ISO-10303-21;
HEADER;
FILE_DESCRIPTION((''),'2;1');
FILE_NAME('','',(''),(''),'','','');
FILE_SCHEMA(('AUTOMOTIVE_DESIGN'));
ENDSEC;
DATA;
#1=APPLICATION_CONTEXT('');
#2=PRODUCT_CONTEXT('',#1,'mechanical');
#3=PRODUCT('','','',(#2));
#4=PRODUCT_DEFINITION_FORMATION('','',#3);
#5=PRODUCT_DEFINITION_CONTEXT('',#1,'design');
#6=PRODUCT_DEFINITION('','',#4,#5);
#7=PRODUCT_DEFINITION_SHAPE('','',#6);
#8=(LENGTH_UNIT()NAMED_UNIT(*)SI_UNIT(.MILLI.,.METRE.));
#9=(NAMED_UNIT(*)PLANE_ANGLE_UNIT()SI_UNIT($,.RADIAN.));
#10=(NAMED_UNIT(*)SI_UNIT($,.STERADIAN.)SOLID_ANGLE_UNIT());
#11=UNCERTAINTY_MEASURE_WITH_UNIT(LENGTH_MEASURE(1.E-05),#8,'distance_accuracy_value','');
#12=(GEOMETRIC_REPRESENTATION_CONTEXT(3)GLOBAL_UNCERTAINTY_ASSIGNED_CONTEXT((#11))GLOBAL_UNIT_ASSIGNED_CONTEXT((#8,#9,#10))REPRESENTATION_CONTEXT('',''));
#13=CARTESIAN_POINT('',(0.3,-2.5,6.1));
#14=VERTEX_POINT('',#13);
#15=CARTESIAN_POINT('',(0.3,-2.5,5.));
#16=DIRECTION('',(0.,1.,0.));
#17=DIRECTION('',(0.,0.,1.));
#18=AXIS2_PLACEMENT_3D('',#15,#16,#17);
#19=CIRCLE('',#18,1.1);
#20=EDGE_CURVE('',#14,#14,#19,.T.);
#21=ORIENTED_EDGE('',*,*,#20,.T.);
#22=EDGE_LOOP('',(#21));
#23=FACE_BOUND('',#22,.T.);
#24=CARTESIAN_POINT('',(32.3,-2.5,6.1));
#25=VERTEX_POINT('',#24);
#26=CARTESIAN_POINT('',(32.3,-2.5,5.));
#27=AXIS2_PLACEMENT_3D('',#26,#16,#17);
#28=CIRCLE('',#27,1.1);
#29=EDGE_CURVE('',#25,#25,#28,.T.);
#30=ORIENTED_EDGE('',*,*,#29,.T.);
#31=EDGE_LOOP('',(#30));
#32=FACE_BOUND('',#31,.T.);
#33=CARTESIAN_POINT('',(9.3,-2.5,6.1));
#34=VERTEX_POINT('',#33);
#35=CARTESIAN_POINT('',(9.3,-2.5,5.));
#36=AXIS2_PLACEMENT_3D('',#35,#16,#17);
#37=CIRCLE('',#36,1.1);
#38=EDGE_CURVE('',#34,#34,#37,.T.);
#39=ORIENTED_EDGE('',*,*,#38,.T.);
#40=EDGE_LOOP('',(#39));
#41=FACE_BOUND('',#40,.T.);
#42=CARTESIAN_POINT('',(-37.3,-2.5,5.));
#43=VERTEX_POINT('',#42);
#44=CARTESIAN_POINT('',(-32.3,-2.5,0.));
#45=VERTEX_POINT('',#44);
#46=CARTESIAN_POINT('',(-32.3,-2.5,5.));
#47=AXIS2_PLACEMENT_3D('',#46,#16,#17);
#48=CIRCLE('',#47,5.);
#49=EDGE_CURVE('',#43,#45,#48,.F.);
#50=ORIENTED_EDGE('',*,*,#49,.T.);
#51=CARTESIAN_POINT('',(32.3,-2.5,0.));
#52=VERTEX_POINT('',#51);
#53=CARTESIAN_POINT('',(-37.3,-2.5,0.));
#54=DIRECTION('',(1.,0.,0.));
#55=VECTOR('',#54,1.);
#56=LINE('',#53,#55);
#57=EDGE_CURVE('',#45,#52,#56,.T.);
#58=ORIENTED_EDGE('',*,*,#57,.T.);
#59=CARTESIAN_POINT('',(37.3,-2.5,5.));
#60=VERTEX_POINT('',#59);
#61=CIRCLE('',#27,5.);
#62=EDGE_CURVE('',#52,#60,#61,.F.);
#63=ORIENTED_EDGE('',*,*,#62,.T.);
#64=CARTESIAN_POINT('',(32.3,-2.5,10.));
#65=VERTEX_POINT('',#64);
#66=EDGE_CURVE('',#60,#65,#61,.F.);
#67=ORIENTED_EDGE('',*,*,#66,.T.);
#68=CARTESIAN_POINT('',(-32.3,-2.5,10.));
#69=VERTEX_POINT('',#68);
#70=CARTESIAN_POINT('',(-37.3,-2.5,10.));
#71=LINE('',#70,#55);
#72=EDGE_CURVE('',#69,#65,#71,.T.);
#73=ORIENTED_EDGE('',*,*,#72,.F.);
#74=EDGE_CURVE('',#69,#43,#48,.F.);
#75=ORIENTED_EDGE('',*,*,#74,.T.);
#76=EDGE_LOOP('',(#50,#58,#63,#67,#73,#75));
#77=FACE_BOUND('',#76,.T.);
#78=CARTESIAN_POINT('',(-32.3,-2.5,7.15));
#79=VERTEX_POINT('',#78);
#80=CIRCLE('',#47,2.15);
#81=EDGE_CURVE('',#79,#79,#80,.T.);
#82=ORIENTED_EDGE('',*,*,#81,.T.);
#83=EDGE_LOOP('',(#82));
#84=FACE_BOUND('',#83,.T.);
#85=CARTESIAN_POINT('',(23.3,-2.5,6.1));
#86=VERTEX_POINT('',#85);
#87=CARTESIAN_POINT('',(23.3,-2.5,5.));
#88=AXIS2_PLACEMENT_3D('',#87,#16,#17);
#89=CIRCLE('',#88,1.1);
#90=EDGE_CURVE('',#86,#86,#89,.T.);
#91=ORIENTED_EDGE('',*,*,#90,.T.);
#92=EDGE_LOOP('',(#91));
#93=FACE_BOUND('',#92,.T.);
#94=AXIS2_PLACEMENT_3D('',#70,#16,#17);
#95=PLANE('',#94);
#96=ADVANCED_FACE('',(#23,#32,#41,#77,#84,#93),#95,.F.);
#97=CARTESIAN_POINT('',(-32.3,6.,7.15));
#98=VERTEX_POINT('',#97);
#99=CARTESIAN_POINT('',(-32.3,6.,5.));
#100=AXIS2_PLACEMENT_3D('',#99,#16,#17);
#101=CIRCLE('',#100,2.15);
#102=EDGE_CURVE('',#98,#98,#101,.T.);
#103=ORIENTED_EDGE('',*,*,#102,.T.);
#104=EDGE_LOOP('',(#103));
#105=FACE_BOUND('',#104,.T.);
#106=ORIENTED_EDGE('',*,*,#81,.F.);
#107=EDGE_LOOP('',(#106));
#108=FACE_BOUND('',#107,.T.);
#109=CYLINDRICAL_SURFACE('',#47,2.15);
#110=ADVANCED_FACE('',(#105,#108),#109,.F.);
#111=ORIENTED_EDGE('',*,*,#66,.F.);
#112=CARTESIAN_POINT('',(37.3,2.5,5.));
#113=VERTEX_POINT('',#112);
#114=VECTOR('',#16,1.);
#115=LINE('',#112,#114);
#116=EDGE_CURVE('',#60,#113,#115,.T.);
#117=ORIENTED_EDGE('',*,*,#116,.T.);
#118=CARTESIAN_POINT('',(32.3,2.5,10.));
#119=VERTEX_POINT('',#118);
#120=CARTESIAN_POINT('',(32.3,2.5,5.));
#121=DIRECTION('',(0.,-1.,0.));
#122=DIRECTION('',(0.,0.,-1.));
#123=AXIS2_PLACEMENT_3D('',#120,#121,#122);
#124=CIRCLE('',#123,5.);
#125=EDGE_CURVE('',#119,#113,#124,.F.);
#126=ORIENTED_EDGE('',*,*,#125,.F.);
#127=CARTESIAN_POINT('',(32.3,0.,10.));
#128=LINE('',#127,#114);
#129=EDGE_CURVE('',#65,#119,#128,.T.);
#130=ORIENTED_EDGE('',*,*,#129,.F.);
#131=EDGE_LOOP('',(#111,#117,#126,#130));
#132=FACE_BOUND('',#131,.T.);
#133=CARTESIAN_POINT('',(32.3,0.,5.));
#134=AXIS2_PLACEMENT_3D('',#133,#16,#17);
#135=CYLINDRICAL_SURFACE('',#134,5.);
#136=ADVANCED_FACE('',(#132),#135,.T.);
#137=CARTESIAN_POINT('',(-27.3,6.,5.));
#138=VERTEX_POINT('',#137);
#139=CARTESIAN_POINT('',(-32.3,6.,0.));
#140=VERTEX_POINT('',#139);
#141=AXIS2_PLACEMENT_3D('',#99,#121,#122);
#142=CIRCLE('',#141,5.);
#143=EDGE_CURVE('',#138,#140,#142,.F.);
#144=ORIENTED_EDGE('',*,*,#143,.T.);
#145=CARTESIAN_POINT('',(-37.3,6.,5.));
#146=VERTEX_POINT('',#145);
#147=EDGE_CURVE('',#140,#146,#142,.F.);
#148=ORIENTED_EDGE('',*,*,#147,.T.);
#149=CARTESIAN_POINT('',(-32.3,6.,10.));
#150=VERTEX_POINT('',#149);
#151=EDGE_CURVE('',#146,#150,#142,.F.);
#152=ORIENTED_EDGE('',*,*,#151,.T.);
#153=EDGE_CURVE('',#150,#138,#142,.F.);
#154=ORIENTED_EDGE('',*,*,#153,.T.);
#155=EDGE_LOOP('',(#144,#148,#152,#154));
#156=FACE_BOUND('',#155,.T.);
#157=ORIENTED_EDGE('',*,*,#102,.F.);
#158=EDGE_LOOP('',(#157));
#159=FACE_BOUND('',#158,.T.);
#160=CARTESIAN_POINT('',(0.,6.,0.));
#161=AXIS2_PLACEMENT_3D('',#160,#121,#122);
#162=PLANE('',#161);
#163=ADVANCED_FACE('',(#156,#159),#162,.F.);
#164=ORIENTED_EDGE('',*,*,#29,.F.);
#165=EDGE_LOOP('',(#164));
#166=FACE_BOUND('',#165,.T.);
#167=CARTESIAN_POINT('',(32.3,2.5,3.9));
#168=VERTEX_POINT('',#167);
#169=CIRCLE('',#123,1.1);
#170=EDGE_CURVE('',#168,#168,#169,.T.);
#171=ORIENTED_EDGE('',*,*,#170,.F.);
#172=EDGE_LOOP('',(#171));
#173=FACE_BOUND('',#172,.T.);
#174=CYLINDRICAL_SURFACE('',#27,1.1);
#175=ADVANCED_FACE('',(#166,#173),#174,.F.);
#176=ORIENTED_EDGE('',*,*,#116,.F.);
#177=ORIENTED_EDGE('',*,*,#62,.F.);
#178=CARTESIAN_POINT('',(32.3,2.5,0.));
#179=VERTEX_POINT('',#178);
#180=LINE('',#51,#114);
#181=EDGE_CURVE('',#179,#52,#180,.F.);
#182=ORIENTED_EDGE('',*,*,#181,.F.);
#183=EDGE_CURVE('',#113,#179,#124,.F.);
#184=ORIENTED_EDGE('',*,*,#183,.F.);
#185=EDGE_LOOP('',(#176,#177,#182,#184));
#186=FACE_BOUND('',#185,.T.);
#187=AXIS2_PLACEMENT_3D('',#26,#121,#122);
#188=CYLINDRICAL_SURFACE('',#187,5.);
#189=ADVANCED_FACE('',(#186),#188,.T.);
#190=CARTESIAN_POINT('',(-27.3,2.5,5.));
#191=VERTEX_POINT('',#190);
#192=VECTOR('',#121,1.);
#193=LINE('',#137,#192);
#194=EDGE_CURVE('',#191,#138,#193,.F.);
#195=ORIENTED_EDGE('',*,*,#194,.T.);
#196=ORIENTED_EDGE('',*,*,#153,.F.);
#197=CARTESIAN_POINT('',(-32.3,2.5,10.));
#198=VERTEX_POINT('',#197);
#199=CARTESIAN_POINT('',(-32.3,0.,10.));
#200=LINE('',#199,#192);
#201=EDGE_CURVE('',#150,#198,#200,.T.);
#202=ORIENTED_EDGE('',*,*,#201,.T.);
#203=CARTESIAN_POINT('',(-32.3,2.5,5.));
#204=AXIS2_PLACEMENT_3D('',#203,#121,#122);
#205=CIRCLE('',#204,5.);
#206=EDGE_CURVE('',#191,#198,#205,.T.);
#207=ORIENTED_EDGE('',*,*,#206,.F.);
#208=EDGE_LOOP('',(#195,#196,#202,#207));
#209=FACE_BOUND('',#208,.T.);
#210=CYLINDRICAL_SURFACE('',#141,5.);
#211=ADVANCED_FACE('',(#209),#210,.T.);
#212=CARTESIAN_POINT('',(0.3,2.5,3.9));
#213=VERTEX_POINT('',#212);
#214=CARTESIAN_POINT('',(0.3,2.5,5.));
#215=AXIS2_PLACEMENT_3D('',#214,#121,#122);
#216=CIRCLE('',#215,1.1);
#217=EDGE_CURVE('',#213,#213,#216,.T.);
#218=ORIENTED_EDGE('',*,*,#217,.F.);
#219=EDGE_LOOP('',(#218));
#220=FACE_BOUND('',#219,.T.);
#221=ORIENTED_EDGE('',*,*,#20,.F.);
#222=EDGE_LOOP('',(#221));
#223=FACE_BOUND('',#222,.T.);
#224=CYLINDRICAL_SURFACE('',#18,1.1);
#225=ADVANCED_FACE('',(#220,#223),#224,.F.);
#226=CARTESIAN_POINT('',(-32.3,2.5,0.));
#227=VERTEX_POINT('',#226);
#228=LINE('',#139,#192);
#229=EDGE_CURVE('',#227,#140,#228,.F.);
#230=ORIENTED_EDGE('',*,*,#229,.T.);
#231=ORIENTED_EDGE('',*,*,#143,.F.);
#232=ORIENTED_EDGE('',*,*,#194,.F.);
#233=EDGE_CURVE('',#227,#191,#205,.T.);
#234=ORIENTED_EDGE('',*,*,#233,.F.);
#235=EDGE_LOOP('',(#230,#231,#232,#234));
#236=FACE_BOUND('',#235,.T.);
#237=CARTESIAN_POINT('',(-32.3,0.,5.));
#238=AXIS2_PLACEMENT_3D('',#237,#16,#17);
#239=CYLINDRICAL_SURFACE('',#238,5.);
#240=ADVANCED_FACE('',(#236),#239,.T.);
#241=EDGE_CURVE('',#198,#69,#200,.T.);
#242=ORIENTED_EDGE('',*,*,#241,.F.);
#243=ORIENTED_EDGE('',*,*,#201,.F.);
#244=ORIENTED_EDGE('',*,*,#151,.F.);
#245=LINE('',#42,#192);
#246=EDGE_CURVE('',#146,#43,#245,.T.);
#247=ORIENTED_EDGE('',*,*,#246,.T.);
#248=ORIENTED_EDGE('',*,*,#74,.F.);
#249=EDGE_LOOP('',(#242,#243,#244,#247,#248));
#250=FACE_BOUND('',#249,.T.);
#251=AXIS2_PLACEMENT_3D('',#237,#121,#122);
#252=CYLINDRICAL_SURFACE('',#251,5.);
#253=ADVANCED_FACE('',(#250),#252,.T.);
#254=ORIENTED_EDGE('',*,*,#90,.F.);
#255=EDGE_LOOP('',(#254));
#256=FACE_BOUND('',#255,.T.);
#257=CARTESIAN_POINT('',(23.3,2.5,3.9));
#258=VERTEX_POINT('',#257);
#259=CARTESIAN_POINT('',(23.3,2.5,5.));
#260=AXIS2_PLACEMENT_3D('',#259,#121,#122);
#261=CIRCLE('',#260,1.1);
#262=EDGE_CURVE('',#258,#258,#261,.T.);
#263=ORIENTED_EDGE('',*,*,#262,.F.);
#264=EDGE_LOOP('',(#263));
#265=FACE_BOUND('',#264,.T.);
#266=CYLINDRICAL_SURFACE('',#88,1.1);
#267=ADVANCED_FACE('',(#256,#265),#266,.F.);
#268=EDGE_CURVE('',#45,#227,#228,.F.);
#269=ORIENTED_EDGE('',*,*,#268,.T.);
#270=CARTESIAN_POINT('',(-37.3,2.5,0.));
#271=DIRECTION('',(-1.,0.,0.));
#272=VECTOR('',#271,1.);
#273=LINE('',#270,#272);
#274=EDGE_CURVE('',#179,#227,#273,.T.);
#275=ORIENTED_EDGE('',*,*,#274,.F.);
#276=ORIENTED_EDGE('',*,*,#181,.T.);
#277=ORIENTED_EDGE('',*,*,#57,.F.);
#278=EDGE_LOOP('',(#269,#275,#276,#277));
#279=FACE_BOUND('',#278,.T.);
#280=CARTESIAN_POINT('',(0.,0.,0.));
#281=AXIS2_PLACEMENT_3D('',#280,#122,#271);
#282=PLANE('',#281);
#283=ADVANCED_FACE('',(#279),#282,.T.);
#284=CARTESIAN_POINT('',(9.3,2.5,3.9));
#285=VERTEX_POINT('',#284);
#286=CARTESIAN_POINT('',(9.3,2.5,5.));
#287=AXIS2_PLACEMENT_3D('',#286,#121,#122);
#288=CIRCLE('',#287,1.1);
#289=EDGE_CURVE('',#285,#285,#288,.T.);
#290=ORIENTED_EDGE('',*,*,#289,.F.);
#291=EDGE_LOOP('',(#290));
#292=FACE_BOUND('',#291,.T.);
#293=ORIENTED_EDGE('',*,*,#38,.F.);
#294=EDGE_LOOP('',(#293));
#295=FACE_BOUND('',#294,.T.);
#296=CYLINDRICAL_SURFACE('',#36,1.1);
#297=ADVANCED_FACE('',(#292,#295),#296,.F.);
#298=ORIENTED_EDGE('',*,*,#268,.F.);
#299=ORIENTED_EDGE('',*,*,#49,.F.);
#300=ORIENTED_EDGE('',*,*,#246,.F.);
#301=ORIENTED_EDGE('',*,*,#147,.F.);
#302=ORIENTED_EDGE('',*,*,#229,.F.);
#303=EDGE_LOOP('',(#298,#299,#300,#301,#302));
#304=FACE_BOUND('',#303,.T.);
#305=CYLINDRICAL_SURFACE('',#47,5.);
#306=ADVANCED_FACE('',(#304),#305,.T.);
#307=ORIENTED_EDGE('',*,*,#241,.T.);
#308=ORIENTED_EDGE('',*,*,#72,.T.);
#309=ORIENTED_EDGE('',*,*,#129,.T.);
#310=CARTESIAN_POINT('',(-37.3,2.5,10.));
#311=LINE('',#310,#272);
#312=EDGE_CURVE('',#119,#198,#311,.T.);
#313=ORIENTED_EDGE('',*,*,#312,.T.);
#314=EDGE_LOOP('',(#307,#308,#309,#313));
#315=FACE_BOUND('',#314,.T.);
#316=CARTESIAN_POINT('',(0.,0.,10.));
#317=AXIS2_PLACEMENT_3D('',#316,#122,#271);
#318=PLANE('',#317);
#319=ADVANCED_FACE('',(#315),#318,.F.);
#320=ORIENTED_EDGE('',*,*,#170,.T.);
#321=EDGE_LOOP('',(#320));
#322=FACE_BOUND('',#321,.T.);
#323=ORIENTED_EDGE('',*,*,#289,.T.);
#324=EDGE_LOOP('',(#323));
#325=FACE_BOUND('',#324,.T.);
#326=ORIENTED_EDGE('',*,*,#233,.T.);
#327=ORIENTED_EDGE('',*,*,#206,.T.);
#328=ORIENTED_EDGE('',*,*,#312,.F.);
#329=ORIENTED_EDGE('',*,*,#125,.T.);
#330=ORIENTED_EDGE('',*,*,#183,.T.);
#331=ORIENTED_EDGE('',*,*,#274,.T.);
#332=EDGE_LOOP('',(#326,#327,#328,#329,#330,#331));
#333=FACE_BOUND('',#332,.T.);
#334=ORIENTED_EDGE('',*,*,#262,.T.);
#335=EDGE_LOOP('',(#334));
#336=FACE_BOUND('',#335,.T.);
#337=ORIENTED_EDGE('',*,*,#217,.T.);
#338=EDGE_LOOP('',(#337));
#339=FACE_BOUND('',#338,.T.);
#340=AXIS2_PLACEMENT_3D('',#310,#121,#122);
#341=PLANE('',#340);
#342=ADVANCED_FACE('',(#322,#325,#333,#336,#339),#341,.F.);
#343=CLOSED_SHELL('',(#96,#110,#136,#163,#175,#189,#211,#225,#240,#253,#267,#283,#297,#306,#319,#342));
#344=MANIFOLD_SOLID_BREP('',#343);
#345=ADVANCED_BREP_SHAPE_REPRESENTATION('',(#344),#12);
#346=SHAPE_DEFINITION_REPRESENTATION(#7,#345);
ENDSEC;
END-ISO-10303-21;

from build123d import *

# Parameters (mm, degrees)
SKETCH_1_W          = 74.6
SKETCH_1_H          = 5
EXTRUDE_1_DEPTH     = 10
SKETCH_4_W          = 10
SKETCH_4_H          = 10
EXTRUDE_2_DEPTH     = 3.5
FILLET_1_R          = 5
SKETCH_2_R          = 2.15
SKETCH_2_R_2        = 1.1
CUT_EXTRUDE_1_DEPTH = 40.541623639


with BuildPart() as part:
    # 스케치1 → 보스-돌출1 (new body)
    with BuildSketch(Plane.XY):
        Rectangle(SKETCH_1_W, SKETCH_1_H)
    extrude(amount=EXTRUDE_1_DEPTH)

    # 스케치4 → 보스-돌출2 (add)
    with BuildSketch(Plane(origin=(0, 2.5, 0), x_dir=(1, 0, 0), z_dir=(0, 1, 0))):
        with Locations((-32.3, -5)):
            Rectangle(SKETCH_4_W, SKETCH_4_H)
    extrude(amount=EXTRUDE_2_DEPTH)

    # 필렛1
    fillet_1_edges = [part.edges().sort_by_distance(p)[0] for p in [
        (37.3, 0, 0),
        (37.3, 0, 10),
        (-37.3, 1.75, 0),
        (-37.3, 1.75, 10),
        (-27.3, 4.25, 10),
        (-27.3, 4.25, 0),
    ]]
    fillet(fillet_1_edges, radius=FILLET_1_R - 0.0001)  # a hair under: the kernel refuses the full size

    # 스케치2 → 컷-돌출1 (cut, through all)
    with BuildSketch(Plane(origin=(0, 6, 0), x_dir=(1, 0, 0), z_dir=(0, 1, 0))):
        with Locations(Location((-32.3, -5, 0), (0, 0, 270))):
            Circle(SKETCH_2_R)
        with Locations(Location((32.3, -5, 0), (0, 0, 270))):
            Circle(SKETCH_2_R_2)
        with Locations(Location((23.3, -5, 0), (0, 0, 270))):
            Circle(SKETCH_2_R_2)
        with Locations(Location((9.3, -5, 0), (0, 0, 270))):
            Circle(SKETCH_2_R_2)
        with Locations(Location((0.3, -5, 0), (0, 0, 270))):
            Circle(SKETCH_2_R_2)
    extrude(amount=-CUT_EXTRUDE_1_DEPTH, mode=Mode.SUBTRACT)


solid = part.part
